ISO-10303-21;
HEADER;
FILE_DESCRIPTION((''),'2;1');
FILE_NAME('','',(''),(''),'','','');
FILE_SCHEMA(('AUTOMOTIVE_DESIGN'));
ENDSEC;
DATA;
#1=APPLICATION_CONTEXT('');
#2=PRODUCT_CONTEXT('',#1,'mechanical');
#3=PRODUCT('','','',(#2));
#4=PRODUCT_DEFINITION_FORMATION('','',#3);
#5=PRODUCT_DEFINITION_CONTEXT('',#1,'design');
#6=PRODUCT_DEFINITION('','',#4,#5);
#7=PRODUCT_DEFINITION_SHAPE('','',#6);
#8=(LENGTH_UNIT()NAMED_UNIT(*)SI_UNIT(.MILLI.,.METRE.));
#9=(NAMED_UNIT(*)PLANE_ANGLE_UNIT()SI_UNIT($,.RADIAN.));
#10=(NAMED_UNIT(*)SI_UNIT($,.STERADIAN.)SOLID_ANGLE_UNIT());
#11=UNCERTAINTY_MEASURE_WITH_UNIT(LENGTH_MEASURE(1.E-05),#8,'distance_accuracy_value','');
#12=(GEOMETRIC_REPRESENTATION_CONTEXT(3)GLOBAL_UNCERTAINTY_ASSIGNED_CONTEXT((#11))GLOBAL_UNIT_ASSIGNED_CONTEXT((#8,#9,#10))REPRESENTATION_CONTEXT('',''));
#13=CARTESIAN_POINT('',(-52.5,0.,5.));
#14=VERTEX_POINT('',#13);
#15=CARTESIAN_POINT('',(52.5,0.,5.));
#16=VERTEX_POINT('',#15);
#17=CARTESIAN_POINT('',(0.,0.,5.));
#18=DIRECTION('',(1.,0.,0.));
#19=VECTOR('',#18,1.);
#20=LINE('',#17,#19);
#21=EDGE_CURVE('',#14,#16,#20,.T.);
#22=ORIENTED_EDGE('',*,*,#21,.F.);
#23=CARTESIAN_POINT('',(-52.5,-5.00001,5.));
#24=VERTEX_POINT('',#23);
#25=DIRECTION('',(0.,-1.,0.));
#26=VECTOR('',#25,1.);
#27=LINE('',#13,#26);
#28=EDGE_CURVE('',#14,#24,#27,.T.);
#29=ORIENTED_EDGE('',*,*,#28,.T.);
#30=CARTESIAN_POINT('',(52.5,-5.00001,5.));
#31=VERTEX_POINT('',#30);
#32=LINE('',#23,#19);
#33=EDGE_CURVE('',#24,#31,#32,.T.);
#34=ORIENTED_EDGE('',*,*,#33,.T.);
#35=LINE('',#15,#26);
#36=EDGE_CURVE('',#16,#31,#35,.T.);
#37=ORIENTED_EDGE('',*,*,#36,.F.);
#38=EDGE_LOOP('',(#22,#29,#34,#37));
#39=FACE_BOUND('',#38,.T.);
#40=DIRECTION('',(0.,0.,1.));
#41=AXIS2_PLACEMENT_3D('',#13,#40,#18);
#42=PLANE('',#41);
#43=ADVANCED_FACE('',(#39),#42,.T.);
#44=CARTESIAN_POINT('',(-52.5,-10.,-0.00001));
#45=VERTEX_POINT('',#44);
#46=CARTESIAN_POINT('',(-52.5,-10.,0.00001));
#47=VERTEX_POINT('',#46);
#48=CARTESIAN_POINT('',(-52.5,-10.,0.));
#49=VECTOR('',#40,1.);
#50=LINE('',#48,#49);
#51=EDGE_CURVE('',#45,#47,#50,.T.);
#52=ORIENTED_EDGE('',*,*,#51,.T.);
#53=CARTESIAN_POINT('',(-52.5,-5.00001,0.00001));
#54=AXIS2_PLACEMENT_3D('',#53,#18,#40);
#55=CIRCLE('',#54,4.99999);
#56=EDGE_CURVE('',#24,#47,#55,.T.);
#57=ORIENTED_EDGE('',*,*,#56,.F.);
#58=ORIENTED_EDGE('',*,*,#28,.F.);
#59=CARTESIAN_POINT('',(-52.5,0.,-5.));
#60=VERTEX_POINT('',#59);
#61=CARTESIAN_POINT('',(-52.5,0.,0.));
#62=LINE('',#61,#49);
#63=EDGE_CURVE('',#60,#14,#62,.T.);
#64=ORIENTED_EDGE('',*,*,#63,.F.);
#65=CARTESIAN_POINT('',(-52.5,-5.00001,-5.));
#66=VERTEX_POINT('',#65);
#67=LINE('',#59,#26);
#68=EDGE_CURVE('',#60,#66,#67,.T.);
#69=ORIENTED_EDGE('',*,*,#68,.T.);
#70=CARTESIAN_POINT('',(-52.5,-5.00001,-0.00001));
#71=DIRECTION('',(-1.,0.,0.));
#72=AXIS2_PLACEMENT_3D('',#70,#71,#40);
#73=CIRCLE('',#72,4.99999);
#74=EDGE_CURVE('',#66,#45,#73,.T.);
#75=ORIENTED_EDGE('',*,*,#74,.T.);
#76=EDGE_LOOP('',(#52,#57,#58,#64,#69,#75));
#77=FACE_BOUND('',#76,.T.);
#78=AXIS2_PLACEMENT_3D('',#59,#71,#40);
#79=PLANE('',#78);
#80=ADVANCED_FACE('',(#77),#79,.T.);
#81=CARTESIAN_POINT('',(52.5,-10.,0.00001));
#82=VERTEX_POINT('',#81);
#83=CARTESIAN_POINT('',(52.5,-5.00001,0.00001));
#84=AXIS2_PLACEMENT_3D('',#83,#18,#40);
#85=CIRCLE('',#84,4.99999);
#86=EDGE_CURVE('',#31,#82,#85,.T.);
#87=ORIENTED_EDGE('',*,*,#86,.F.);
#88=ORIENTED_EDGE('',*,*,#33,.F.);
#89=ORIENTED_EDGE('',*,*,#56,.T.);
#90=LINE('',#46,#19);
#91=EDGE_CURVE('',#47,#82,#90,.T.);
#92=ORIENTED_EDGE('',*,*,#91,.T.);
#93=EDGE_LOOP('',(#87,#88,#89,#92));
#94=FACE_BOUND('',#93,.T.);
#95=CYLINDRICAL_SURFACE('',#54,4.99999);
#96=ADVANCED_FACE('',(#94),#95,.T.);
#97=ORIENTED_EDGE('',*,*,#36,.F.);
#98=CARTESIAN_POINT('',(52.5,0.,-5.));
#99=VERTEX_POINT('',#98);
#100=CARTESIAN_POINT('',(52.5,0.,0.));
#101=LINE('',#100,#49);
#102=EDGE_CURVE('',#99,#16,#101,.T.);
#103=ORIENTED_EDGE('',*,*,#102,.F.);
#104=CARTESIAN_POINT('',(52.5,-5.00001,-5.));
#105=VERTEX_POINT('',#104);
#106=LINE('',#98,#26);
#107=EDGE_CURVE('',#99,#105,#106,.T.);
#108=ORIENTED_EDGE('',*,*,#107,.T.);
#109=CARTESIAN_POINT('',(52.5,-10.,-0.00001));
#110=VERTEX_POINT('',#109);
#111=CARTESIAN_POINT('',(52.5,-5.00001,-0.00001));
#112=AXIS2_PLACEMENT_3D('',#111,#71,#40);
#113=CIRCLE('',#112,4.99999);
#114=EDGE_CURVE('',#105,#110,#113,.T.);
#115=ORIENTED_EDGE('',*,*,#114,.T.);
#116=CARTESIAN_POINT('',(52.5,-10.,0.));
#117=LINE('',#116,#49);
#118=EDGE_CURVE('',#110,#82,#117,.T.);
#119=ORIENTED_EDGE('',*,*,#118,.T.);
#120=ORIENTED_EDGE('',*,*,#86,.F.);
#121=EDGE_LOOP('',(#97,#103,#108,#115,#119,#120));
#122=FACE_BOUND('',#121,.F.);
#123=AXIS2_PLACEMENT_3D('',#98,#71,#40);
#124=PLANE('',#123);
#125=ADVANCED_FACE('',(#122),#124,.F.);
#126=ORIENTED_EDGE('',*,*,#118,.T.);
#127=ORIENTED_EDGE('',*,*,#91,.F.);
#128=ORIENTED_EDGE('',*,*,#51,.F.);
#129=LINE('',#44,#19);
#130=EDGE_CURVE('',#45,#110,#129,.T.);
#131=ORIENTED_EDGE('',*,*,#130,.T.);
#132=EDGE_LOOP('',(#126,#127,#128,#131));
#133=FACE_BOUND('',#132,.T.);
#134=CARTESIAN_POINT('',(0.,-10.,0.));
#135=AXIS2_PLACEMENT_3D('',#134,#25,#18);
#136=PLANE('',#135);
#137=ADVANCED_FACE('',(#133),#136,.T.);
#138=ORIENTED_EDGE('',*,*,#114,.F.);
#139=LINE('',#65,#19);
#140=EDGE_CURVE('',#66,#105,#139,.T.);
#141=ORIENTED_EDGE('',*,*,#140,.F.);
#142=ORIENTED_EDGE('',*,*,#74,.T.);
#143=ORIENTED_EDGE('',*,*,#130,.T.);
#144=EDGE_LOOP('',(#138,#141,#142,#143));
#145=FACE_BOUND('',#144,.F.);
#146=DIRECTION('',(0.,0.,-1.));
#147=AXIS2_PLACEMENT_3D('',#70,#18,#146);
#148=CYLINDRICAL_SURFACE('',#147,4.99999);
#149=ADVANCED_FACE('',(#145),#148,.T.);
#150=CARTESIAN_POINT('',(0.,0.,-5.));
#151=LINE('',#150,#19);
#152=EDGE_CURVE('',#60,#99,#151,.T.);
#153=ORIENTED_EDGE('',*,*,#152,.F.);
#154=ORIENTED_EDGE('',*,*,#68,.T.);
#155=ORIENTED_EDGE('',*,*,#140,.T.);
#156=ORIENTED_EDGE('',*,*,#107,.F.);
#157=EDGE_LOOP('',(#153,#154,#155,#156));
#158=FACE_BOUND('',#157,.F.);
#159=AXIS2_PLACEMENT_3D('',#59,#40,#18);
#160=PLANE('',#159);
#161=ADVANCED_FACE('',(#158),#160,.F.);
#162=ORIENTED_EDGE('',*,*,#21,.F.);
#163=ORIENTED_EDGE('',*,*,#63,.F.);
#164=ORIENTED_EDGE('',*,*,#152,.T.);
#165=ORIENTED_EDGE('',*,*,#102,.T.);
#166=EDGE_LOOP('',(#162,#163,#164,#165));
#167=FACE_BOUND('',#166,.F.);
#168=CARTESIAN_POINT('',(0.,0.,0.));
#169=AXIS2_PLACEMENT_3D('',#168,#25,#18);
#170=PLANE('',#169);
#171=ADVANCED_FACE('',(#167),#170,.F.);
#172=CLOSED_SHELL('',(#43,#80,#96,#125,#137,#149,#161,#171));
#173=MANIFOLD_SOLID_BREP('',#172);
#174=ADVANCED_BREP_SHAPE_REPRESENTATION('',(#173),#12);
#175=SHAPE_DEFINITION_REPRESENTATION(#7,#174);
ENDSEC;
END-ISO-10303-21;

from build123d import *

# Parameters (mm, degrees)
F0_W     = 105
F0_H     = 10
F1_DEPTH = 10
F2_R     = 4.99999


# Not quite as in the source:
# - a fillet or chamfer is up to 0.001 mm smaller than in the source, because OpenCascade refuses the exact size


with BuildPart() as f1:
    # F0 (on Front) → F1 (new body)
    with BuildSketch(Plane.XZ):
        Rectangle(F0_W, F0_H)
    extrude(amount=F1_DEPTH)

    # F2 (radius 5 in the source; OpenCascade refuses exactly that, so slightly less here)
    f2_edges = [f1.edges().sort_by_distance(p)[0] for p in [
        (0, -10, -5),
        (0, -10, 5),
    ]]
    fillet(f2_edges, radius=F2_R)


solid = f1.part
